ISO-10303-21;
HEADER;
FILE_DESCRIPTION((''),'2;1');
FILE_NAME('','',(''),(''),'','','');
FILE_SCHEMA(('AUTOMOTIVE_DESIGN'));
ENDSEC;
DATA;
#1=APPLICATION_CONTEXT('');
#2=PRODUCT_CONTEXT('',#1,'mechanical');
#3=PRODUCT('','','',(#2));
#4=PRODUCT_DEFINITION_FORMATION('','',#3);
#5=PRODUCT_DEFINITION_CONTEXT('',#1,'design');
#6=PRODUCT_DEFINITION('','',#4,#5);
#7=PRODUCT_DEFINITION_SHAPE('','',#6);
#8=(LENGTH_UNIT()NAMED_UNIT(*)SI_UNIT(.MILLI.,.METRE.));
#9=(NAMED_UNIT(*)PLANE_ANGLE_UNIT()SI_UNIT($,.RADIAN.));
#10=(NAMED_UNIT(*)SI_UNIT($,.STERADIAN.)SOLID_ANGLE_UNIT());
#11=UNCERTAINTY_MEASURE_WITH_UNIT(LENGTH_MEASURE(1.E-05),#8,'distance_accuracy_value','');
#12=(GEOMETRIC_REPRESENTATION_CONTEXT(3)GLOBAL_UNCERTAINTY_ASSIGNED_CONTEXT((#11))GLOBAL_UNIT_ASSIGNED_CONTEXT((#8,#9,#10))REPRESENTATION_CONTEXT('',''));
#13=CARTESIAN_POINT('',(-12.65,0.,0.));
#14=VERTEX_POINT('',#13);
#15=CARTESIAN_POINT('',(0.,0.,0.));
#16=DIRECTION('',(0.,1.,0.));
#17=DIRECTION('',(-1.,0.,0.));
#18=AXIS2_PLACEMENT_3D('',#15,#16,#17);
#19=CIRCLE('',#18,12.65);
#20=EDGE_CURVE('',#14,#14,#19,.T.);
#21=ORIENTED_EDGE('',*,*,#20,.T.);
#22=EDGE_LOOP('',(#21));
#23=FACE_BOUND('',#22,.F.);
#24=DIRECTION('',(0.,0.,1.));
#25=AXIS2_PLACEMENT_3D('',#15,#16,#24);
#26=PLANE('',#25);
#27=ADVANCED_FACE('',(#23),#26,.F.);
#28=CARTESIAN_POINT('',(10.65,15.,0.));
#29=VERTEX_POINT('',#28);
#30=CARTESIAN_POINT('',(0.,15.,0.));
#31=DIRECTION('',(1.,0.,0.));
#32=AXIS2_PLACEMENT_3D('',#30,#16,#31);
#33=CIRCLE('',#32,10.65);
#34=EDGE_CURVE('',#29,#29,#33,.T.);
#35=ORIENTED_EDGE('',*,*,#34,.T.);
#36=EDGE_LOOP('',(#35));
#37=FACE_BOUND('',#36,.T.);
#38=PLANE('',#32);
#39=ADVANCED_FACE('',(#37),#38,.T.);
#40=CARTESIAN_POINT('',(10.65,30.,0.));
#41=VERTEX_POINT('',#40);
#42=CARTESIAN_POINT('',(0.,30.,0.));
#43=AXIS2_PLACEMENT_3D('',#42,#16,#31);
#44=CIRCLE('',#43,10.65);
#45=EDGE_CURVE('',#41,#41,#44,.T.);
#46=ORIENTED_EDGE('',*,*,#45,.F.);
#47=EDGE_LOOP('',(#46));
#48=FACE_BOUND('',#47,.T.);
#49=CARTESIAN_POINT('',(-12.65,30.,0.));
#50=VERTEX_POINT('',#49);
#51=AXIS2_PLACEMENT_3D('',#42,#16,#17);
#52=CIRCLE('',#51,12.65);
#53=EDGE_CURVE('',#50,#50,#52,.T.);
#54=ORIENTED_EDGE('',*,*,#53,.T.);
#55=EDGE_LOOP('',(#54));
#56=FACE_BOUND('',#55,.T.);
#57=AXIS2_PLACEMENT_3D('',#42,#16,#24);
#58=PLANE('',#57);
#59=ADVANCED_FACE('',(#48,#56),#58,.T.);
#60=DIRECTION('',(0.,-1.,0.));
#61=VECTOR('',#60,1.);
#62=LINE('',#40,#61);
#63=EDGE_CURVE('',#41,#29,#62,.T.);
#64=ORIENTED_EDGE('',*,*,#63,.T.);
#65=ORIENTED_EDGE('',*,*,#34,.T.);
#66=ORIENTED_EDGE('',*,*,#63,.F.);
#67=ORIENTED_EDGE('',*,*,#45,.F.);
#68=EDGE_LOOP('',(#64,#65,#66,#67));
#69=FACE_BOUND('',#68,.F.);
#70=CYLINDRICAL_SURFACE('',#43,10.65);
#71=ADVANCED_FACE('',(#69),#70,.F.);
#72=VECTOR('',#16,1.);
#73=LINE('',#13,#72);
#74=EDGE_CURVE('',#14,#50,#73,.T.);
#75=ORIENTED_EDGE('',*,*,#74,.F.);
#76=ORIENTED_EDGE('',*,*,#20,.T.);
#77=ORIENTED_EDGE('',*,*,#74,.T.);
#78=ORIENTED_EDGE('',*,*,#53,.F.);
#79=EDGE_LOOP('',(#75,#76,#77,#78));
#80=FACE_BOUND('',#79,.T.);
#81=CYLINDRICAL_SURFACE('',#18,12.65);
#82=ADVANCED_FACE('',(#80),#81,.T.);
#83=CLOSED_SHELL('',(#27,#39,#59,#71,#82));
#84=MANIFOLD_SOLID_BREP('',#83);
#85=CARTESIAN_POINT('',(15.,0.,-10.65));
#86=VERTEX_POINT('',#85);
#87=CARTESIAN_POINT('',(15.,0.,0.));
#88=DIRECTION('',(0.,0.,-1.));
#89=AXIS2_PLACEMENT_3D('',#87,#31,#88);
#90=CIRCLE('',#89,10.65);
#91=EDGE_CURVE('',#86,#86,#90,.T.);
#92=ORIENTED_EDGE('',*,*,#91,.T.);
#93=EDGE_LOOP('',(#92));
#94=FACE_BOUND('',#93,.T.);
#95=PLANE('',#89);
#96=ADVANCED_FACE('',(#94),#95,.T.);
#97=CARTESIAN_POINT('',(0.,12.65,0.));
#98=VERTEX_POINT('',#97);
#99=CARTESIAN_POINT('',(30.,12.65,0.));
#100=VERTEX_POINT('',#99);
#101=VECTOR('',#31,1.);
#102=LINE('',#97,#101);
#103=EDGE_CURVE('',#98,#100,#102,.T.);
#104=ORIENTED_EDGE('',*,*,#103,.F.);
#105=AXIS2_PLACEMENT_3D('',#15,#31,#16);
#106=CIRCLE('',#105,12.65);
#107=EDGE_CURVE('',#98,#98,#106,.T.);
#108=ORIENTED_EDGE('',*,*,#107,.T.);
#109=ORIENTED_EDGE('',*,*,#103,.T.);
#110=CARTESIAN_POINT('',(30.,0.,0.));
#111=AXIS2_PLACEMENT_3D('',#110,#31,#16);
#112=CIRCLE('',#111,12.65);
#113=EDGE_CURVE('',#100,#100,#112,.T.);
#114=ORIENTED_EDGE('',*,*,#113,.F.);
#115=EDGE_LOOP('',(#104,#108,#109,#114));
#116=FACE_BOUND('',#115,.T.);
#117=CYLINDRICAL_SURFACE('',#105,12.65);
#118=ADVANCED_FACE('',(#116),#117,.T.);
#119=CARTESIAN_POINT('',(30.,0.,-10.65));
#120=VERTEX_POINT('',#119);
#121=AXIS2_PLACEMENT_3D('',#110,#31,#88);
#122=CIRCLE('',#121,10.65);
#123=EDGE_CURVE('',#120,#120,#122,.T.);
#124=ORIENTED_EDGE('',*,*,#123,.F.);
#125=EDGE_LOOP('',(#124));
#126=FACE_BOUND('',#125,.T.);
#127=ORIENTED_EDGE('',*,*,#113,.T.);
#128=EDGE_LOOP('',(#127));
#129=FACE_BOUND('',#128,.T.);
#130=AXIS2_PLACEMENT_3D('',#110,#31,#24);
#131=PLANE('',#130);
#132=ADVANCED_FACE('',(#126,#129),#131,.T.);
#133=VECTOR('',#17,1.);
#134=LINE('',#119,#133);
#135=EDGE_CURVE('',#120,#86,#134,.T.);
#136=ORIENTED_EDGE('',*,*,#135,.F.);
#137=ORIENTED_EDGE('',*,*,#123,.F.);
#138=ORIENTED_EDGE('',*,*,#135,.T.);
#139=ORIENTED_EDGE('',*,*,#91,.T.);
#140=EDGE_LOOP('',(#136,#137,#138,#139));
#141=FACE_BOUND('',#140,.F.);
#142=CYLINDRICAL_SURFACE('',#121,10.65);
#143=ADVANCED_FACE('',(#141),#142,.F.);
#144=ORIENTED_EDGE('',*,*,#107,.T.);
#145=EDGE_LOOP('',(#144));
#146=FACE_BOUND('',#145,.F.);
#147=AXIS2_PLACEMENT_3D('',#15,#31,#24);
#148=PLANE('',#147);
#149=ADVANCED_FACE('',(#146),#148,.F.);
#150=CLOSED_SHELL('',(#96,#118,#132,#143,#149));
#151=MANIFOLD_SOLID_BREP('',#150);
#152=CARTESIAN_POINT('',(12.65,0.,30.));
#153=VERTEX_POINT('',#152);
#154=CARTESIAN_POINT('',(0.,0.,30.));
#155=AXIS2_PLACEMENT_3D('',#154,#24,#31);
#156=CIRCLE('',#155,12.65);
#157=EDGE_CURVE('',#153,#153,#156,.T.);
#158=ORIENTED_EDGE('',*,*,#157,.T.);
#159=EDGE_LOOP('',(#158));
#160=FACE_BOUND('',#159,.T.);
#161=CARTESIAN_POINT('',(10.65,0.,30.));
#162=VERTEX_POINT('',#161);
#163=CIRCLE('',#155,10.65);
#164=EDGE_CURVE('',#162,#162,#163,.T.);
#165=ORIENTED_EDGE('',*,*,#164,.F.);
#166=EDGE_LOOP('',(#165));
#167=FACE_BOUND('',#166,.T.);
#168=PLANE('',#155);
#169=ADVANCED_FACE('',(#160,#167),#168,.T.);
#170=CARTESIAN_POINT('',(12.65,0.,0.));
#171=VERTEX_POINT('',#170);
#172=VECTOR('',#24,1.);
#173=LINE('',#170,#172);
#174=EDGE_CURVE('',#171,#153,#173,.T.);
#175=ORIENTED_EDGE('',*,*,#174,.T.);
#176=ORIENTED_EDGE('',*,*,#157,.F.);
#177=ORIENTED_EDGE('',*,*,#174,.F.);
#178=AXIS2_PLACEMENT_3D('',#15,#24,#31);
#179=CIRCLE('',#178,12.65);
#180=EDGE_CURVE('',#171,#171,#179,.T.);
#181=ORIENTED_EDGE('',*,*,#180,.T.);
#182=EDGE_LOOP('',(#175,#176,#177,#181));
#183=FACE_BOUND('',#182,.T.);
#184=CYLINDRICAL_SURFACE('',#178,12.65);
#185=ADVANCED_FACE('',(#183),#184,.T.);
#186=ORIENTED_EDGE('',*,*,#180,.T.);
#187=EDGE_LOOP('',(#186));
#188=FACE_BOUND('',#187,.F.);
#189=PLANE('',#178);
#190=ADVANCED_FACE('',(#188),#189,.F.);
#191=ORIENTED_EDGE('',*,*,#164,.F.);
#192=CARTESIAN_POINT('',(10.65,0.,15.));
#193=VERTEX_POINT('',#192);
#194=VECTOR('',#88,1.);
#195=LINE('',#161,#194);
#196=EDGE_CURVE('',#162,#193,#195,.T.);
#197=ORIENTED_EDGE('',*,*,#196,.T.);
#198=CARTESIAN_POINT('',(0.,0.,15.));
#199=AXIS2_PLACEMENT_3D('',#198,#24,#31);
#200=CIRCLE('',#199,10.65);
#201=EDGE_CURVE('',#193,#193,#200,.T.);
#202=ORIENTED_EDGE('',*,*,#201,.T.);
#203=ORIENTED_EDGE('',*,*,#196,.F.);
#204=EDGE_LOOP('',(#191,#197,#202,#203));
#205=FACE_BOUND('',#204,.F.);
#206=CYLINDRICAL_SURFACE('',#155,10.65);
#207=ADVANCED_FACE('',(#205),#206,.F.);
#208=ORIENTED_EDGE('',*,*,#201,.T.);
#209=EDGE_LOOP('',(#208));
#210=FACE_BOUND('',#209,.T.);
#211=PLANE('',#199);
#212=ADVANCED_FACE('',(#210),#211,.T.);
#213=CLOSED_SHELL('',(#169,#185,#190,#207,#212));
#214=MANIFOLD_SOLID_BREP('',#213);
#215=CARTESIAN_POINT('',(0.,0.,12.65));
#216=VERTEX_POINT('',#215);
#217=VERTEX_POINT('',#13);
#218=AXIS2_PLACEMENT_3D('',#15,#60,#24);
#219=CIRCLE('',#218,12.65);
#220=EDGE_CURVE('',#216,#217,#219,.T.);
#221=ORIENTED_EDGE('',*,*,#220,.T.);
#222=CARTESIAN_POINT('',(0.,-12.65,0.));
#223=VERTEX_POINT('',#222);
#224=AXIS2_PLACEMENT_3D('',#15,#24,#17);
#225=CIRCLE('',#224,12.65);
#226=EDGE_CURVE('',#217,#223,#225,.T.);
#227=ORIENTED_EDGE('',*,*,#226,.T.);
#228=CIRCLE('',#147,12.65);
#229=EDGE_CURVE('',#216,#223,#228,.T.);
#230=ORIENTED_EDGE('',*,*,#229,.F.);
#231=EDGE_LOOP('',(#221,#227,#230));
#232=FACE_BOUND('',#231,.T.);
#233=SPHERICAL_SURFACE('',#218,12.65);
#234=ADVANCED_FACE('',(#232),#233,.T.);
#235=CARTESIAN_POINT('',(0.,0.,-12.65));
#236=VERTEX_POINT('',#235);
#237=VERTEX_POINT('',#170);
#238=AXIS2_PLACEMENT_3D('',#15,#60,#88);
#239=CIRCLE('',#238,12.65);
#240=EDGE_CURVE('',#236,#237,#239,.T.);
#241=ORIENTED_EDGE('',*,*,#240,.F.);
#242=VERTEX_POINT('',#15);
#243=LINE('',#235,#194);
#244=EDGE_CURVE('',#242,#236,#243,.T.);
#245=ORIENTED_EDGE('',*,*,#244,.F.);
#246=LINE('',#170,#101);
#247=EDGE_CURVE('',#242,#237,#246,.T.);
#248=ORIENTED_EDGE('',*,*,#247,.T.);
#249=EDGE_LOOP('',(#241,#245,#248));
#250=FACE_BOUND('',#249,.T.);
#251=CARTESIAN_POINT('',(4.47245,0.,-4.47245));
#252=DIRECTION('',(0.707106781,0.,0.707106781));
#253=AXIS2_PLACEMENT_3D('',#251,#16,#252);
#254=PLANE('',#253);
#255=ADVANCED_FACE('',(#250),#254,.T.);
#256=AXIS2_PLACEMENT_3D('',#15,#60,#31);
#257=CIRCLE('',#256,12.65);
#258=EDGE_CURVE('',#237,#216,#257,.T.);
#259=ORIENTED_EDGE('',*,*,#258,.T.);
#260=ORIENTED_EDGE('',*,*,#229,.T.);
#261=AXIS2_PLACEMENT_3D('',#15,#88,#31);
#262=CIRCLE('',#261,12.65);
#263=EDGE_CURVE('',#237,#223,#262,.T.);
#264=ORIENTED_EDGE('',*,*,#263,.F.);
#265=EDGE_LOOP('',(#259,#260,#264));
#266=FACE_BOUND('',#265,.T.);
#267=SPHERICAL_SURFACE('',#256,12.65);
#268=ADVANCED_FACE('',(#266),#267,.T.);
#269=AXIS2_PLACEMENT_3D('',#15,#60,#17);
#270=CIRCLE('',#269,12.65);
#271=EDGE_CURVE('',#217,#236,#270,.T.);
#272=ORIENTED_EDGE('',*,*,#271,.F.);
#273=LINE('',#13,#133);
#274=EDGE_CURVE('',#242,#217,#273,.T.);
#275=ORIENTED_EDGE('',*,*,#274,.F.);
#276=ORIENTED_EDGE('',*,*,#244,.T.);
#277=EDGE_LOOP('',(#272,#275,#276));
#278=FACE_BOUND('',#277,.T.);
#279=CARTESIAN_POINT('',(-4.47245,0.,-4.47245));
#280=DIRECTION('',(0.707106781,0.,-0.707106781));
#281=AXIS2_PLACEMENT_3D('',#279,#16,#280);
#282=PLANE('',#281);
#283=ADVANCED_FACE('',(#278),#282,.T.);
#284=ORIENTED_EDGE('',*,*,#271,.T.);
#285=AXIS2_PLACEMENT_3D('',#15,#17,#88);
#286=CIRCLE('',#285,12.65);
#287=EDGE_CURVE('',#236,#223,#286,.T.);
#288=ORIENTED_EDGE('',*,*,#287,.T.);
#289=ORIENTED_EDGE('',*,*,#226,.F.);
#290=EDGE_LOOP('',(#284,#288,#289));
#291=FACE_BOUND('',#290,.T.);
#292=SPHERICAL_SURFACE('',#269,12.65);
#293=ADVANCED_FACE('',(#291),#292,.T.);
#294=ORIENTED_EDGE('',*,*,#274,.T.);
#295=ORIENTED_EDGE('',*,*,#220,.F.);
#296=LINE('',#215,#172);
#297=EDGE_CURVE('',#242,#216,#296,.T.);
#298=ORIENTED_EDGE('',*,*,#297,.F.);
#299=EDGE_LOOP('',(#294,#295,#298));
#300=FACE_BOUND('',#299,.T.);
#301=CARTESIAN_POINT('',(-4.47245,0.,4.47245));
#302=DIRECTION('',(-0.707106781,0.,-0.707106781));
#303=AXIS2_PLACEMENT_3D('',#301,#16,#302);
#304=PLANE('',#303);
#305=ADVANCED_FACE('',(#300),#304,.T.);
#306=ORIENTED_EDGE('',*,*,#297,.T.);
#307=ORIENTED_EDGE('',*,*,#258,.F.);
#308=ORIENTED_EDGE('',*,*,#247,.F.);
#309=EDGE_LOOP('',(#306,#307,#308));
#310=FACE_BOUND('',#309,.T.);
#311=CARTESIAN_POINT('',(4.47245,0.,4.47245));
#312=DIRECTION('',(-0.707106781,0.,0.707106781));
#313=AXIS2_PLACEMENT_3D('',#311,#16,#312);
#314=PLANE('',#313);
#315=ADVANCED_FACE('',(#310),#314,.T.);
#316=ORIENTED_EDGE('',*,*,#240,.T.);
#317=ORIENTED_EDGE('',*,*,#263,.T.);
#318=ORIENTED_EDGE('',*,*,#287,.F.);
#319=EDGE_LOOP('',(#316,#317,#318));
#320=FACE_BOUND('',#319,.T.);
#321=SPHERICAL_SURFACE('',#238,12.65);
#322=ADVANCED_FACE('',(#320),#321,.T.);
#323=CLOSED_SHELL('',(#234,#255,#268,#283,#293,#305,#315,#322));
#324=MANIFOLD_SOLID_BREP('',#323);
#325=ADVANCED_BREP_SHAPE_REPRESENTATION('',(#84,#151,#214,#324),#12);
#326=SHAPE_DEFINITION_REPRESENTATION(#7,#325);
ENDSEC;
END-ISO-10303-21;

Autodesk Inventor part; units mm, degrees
sketch "Sketch1" plane through (0, 0, 0) normal (0, 1, 0) x (-1, 0, 0)
  line L0 (0, 0) -> (0, 30)
  line L1 (0, 0) -> (-30, 0)
  dimension "d0" = 30
  dimension "d1" = 30
ref_plane "Work Plane1" through (0, 0, 30) normal (0, 0, 1) x (1, 0, 0)
sketch "Sketch2" plane through (0, 0, 30) normal (0, 0, 1) x (1, 0, 0)
  circle A0 centre (0, 0) radius 12.65
  dimension "d2" = 25.3
sketch "Sketch3" plane through (0, 0, 0) normal (0, 1, 0) x (-1, 0, 0)
  line L0 (0, 0) -> (0, 30) projected
sweep "Sweep1" add profiles "Sketch2" path "Sketch3"
sketch "Sketch4" plane through (0, 0, 0) normal (1, 0, 0) x (0, 1, 0)
  line L0 (0, 0) -> (30, 0)
  dimension "d5" = 30
ref_plane "Work Plane2" through (0, 30, 0) normal (0, 1, 0) x (-1, 0, 0)
sketch "Sketch5" plane through (0, 30, 0) normal (0, 1, 0) x (-1, 0, 0)
  circle A0 centre (0, 0) radius 12.65
  dimension "d6" = 25.3
sweep "Sweep2" add profiles "Sketch5" path "Sketch4" separate body
sketch "Sketch6" plane through (0, 0, 0) normal (0, 1, 0) x (-1, 0, 0)
  line L0 (0, 0) -> (-30, 0) projected
ref_plane "Work Plane3" through (30, 0, 0) normal (1, 0, 0) x (0, 1, 0)
sketch "Sketch7" plane through (30, 0, 0) normal (1, 0, 0) x (0, 1, 0)
  circle A0 centre (0, 0) radius 12.65
  dimension "d9" = 25.3
sweep "Sweep3" add profiles "Sketch7" path "Sketch6" separate body
sketch "Sketch8" plane through (0, 0, 0) normal (-1, 0, 0) x (0, 0, 1)
  circle A0 centre (0, 0) radius 12.65 projected
  line L0 (-12.65, 0) -> (12.65, 0) projected
  line L1 (0, 12.65) -> (0, -12.65) projected
sketch "Sketch10" plane through (0, 0, 0) normal (0, -1, 0) x (1, 0, 0)
  circle A0 centre (0, 0) radius 12.65 projected
sketch3d "3D Sketch1"
  arc A0 (-12.65, 0, 0) -> (0, 0, -12.65) centre (0, 0, 0) ccw
  arc A1 (0, 0, -12.65) -> (12.65, 0, 0) centre (0, 0, 0) ccw
  arc A2 (12.65, 0, 0) -> (0, 0, 12.65) centre (0, 0, 0) ccw
  arc A3 (0, 0, 12.65) -> (-12.65, 0, 0) centre (0, 0, 0) ccw
sweep "Sweep4" add profiles "Sketch8" path "3D Sketch1" separate body picked at (-0.9383, -8.3276) contours A0 L0 L1
sketch "Sketch12" plane through (0, 30, 0) normal (0, 1, 0) x (1, 0, 0)
  circle A0 centre (0, 0) radius 10.65
  dimension "d16" = 21.3
extrude "Extrusion1" cut sketch "Sketch12" against normal blind 15 bodies 2
sketch "Sketch13" plane through (30, 0, 0) normal (1, 0, 0) x (0, 0, -1)
  circle A0 centre (0, 0) radius 10.65
  dimension "d19" = 21.3
extrude "Extrusion2" cut sketch "Sketch13" against normal blind 15 bodies 3
sketch "Sketch14" plane through (0, 0, 30) normal (0, 0, 1) x (1, 0, 0)
  circle A0 centre (0, 0) radius 10.65
  dimension "d22" = 21.3
extrude "Extrusion3" cut sketch "Sketch14" against normal blind 15 bodies 1
equation "\"d1\" = d0"
properties part number "hoek drieweg" material "ABS Plastic"
